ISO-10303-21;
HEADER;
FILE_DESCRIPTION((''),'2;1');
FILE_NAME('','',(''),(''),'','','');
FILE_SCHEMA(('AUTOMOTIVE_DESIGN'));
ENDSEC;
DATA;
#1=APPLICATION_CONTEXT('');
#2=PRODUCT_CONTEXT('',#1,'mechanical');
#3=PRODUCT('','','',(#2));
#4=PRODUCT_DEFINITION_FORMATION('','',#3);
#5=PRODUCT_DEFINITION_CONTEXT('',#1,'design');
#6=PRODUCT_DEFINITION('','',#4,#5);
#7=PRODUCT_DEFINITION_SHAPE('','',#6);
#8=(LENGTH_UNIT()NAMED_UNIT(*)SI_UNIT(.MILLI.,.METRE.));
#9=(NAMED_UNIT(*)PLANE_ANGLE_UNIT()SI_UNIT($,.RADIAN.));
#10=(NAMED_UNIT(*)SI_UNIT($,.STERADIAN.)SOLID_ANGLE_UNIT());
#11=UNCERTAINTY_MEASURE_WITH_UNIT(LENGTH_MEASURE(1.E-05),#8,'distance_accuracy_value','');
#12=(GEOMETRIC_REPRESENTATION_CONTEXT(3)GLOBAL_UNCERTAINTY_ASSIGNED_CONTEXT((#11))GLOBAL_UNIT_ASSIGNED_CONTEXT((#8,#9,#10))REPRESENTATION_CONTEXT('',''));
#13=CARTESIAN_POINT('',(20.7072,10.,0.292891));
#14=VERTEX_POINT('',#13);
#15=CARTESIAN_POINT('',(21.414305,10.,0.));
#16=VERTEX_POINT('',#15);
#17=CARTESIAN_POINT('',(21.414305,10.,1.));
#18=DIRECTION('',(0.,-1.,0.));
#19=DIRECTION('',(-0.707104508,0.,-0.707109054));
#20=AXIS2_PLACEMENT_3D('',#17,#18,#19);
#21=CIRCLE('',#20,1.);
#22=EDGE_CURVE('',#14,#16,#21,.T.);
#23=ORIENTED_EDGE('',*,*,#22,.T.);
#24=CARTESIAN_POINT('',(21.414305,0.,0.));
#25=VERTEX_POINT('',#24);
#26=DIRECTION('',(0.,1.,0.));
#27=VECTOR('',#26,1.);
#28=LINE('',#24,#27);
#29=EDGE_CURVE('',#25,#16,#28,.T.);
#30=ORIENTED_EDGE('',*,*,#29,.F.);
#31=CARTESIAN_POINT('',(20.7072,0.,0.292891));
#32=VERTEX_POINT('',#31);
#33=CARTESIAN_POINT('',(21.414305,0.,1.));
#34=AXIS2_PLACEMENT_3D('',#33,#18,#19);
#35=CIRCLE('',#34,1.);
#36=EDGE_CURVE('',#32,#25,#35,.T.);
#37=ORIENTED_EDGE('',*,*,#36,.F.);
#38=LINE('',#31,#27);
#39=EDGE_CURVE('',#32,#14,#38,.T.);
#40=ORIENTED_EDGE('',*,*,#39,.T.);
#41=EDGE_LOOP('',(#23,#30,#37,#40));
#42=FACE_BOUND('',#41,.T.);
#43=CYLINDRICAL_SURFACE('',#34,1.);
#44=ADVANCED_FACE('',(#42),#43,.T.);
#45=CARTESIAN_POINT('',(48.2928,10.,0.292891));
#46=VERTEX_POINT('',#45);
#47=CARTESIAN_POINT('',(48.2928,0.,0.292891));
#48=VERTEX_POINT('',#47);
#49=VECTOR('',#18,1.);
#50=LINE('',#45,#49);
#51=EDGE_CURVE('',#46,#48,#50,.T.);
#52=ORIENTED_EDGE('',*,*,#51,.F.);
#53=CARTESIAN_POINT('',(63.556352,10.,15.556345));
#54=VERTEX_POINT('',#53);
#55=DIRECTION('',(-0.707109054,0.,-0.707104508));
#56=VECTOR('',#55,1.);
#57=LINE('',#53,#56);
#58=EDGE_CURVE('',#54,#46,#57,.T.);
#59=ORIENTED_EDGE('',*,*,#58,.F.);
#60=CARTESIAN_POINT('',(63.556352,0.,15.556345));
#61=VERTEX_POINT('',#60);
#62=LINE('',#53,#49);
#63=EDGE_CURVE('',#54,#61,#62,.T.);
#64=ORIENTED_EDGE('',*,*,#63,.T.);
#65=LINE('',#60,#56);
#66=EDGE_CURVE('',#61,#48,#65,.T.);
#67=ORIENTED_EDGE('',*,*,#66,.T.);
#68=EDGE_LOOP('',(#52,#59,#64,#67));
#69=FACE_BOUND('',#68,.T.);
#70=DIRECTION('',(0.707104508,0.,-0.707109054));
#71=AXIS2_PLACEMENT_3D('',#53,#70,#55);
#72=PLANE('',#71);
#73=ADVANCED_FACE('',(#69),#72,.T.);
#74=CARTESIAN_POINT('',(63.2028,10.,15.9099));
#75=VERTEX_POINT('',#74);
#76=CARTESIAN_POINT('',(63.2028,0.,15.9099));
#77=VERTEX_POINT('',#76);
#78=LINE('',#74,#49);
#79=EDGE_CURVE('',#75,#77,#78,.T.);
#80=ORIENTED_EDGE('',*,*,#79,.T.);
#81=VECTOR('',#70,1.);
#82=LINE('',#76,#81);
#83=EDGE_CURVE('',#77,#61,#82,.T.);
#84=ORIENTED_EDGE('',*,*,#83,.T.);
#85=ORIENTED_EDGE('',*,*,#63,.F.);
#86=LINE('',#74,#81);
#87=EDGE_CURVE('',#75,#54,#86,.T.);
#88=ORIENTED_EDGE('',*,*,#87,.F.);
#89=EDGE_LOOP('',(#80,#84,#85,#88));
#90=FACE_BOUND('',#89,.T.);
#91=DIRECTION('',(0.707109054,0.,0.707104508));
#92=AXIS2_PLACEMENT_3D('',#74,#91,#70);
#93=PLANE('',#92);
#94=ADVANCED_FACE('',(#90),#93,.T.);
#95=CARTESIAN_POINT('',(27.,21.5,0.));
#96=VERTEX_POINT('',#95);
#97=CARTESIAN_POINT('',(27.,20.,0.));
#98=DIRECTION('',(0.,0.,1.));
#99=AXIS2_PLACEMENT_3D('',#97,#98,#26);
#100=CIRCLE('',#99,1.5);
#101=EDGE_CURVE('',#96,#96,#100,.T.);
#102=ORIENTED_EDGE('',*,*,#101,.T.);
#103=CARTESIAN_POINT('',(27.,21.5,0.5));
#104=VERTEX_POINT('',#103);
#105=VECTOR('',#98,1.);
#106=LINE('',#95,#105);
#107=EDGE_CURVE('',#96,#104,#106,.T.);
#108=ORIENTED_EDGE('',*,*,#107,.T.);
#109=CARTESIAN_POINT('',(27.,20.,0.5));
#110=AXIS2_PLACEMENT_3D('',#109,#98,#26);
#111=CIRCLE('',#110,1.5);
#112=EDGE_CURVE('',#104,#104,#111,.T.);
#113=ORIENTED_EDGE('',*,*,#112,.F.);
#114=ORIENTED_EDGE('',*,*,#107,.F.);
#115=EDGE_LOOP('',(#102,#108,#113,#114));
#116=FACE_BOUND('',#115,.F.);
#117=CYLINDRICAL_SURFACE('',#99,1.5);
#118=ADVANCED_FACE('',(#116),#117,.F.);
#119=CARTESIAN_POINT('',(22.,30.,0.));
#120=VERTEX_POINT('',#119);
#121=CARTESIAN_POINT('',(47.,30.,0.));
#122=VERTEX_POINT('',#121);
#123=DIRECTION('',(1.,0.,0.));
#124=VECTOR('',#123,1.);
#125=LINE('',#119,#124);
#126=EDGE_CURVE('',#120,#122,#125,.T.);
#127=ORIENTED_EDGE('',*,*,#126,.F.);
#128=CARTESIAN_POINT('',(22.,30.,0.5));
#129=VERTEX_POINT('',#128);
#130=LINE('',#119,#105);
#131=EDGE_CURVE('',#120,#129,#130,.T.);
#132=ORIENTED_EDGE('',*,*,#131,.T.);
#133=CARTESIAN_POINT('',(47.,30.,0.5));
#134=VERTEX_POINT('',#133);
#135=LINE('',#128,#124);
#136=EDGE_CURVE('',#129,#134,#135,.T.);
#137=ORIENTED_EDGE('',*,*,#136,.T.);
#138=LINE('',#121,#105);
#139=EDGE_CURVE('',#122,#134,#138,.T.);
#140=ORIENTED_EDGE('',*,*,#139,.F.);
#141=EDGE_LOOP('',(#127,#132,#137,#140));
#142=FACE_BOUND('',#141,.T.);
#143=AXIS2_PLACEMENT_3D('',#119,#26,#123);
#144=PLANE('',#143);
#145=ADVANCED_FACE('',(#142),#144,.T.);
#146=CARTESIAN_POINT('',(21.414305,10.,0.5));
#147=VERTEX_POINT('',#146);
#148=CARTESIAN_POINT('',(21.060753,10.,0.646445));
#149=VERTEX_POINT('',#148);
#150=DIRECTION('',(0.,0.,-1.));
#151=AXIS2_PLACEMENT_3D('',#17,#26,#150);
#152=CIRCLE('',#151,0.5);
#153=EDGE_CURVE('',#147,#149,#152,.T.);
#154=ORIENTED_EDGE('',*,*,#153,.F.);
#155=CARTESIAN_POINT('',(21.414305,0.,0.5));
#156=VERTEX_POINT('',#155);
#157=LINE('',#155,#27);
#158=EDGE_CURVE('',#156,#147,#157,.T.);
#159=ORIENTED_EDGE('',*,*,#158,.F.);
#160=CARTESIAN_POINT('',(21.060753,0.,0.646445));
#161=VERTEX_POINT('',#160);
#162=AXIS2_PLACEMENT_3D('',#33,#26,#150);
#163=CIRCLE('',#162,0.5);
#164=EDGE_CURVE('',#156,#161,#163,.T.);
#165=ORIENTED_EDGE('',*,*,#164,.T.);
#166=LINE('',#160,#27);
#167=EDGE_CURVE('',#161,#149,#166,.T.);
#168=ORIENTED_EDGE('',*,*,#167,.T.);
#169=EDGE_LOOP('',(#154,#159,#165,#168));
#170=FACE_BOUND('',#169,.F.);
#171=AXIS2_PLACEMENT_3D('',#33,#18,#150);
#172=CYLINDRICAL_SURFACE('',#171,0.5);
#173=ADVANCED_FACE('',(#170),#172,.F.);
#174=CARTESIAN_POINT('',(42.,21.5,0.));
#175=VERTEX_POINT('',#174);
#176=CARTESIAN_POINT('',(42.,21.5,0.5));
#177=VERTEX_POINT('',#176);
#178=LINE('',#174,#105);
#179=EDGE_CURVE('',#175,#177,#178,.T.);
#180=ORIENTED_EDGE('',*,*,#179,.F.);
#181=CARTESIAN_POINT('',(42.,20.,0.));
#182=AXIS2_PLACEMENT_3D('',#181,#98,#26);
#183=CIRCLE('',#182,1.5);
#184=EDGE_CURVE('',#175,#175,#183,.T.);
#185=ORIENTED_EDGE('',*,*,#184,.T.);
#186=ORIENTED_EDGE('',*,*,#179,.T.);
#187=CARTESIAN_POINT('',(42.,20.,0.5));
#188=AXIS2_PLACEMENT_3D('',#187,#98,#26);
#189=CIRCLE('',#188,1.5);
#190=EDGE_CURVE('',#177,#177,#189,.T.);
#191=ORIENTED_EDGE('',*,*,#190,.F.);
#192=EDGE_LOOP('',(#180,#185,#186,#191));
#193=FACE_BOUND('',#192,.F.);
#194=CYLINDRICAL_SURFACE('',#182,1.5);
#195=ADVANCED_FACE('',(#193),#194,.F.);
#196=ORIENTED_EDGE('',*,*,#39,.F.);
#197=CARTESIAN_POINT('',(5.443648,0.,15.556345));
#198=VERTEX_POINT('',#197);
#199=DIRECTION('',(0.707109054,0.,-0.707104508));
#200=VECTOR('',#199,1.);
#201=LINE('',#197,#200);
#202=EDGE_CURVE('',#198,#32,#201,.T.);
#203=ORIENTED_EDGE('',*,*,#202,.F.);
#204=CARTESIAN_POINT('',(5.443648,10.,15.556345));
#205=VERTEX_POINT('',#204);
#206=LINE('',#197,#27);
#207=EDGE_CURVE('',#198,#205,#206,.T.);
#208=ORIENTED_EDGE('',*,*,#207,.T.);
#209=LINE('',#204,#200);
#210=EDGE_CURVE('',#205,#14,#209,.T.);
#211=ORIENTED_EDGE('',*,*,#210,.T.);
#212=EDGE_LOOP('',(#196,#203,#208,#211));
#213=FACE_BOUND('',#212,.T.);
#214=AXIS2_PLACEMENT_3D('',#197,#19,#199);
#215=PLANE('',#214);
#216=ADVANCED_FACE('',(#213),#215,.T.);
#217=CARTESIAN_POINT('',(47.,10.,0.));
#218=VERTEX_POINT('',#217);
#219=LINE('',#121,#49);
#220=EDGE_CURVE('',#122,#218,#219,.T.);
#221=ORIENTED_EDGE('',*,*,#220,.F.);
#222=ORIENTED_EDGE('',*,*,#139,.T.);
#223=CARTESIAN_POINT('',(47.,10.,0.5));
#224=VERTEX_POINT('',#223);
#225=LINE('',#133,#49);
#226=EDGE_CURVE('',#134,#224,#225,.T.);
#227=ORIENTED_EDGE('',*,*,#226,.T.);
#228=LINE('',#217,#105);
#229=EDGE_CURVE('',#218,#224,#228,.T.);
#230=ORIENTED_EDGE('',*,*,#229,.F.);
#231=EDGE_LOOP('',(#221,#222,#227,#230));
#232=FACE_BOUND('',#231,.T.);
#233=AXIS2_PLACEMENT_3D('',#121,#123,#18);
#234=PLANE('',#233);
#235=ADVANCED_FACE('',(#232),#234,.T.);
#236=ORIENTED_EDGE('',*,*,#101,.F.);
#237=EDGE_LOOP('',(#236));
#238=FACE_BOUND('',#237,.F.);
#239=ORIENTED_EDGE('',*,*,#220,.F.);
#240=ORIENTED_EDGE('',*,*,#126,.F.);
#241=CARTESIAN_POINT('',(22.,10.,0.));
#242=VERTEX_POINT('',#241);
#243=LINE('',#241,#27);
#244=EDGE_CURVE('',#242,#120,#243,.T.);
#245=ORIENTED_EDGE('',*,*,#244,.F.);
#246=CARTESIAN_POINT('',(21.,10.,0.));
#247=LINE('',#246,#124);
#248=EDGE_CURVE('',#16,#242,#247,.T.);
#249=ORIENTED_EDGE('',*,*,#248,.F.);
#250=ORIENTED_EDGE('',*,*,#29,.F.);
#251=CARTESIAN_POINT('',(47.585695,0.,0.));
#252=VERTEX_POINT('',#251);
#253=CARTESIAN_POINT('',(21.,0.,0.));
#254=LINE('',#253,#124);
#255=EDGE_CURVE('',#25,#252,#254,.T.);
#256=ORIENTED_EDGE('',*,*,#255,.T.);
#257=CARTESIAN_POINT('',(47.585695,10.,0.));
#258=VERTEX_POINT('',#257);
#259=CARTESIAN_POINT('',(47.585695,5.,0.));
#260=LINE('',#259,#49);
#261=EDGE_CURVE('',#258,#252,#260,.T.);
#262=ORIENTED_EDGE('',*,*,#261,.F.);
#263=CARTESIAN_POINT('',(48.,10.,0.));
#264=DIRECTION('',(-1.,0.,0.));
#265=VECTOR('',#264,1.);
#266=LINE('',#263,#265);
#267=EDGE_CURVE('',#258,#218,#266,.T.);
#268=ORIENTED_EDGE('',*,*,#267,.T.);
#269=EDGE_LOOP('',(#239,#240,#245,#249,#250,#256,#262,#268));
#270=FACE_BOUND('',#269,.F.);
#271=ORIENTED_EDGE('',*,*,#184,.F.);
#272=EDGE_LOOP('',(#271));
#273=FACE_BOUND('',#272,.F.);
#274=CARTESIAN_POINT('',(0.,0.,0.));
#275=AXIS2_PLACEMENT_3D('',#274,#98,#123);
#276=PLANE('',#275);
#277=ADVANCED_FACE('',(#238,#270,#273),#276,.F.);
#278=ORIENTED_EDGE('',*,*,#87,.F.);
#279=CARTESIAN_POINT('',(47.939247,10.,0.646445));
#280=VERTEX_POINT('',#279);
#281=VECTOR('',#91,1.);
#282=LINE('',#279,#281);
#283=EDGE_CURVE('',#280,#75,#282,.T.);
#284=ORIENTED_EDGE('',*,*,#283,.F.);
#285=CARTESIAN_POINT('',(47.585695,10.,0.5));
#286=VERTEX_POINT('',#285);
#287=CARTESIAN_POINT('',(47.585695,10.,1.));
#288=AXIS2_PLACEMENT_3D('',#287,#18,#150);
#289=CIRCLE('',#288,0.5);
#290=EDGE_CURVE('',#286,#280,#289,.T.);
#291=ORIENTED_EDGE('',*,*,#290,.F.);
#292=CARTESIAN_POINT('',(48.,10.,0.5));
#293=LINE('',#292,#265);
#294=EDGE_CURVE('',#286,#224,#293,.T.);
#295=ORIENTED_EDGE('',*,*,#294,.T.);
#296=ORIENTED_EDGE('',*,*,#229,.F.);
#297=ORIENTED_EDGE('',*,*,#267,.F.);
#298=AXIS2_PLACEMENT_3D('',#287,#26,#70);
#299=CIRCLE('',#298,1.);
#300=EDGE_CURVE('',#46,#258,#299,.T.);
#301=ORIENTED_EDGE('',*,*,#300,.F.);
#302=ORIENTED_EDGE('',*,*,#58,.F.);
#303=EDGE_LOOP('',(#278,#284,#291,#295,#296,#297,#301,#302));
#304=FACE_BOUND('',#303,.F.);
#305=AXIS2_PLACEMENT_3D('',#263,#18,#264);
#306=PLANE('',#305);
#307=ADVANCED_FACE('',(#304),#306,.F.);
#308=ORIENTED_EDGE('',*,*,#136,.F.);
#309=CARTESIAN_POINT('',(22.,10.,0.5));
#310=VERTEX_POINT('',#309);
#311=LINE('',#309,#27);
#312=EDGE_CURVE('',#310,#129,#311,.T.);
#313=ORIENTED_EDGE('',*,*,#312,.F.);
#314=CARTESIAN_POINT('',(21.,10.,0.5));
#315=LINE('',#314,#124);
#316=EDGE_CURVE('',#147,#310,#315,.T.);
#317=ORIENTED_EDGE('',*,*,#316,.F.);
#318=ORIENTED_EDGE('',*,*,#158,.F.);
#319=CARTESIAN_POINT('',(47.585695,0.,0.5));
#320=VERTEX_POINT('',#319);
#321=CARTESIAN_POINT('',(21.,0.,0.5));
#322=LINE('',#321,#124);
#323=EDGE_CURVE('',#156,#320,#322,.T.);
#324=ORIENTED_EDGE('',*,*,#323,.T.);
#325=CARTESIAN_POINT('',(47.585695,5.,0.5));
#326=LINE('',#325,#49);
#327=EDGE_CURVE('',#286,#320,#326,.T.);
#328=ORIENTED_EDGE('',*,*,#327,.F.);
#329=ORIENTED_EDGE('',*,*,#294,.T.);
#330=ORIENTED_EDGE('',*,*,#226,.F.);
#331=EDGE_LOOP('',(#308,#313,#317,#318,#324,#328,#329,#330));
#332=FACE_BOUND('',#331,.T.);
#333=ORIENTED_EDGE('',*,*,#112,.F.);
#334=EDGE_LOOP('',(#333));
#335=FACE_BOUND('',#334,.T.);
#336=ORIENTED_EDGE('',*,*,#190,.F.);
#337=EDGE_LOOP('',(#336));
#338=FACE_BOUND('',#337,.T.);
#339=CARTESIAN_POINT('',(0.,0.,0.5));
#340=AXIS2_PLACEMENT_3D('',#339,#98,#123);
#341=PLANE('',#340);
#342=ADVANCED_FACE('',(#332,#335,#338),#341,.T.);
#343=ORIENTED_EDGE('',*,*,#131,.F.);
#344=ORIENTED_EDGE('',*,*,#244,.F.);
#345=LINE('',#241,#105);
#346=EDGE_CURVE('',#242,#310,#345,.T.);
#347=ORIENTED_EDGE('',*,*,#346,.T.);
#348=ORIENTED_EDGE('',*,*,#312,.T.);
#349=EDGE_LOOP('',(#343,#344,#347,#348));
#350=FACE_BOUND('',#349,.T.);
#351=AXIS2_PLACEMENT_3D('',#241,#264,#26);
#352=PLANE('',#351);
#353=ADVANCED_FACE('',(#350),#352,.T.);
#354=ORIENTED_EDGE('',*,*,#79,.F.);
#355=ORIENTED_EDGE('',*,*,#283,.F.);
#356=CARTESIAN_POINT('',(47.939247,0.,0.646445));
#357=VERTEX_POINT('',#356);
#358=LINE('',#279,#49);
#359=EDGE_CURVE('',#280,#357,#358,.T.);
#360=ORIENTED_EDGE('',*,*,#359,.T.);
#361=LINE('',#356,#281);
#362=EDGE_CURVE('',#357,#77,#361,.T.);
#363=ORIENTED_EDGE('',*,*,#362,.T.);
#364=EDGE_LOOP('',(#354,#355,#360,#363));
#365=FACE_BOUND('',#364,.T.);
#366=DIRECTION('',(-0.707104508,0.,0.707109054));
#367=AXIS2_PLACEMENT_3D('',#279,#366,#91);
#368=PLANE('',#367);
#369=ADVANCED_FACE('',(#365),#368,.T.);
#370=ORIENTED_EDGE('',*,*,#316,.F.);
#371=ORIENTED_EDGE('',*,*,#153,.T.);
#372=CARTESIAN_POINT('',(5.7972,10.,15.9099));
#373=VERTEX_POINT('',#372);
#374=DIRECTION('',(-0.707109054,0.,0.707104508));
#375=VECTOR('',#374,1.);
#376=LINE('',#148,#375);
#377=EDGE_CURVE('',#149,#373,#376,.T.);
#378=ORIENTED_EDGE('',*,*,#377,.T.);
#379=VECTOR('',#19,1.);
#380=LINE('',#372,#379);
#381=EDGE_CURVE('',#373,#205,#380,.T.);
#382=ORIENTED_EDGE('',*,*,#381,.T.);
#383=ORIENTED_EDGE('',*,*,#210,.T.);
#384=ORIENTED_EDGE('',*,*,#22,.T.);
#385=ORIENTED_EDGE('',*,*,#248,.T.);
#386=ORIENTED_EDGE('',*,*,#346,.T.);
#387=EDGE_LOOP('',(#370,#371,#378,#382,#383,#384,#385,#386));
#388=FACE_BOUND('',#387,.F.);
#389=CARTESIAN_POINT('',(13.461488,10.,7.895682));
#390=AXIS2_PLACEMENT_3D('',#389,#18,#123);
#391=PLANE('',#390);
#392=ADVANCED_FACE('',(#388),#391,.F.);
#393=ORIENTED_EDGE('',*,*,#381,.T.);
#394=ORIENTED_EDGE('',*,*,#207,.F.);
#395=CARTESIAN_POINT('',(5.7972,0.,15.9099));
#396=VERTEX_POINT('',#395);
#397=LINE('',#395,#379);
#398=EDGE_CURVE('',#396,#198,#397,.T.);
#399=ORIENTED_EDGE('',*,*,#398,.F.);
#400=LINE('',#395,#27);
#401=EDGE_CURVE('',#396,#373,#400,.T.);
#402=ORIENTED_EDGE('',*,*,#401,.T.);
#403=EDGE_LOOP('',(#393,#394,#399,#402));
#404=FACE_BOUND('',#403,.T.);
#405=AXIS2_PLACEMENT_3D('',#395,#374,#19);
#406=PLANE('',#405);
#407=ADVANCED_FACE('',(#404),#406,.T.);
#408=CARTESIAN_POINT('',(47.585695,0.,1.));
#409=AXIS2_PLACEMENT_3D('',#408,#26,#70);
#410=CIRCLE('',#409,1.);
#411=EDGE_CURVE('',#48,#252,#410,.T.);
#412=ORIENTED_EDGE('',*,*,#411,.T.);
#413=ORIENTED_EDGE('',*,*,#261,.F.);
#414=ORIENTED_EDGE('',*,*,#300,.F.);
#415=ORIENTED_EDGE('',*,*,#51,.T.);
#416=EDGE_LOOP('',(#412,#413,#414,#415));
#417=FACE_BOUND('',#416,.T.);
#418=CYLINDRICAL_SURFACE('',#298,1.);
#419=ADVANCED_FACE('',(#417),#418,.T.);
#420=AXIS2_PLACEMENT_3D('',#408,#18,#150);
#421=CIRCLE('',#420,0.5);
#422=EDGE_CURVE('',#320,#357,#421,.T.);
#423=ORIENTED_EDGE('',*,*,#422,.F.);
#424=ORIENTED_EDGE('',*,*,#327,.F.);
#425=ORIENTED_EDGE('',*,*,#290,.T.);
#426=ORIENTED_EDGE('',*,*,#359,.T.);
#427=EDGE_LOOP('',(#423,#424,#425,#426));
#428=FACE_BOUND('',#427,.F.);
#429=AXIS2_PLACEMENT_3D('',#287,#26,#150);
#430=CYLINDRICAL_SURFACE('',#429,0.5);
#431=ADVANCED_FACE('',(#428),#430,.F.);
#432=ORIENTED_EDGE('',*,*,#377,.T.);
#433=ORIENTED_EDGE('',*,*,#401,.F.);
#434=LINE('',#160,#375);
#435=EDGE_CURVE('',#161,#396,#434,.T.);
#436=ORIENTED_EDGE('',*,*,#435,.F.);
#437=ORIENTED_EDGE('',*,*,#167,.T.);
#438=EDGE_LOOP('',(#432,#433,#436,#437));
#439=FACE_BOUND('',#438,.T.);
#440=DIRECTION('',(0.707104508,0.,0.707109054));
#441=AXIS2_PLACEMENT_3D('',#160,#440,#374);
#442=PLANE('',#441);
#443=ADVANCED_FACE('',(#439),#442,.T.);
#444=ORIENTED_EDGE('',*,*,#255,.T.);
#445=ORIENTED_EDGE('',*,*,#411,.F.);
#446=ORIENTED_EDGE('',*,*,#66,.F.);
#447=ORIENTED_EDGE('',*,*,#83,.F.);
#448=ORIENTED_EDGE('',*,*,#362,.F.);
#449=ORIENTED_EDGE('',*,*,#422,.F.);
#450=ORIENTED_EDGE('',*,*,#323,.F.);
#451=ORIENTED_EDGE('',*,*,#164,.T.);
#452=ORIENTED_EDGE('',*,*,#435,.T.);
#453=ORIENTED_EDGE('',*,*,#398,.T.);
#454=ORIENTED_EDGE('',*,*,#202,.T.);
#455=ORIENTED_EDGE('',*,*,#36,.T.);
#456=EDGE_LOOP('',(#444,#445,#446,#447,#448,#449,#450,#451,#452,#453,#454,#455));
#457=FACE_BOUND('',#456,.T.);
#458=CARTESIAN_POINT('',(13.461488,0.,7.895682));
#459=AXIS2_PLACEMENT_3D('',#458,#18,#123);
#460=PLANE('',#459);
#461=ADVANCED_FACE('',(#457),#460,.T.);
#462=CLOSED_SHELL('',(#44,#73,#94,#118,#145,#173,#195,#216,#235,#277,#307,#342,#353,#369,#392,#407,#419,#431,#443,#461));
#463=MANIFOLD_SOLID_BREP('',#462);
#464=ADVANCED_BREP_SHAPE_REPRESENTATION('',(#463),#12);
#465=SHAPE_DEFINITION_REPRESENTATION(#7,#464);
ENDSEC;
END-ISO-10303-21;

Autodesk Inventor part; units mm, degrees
ref_plane "YZ Plane" through (0, 0, 0) normal (1, 0, 0) x (0, 1, 0)
ref_plane "XZ Plane" through (0, 0, 0) normal (0, 1, 0) x (-1, 0, 0)
ref_plane "XY Plane" through (0, 0, 0) normal (0, 0, 1) x (1, 0, 0)
sketch "Sketch1" plane through (0, 0, 0) normal (0, 0, 1) x (1, 0, 0)
  line L0 (0, 0) -> (0, 10)
  line L1 (0, 10) -> (21, 10)
  line L2 (22, 10) -> (22, 30)
  line L3 (22, 30) -> (47, 30)
  line L4 (47, 30) -> (47, 10)
  line L5 (48, 10) -> (69, 10)
  line L6 (69, 10) -> (69, 0)
  line L7 (21, 10) -> (21, 0)
  line L8 (48, 10) -> (48, 0)
  line L9 (69, 0) -> (48, 0)
  line L10 (21, 0) -> (0, 0)
  line L11 (21, 0) -> (48, 0)
  line L12 (48, 10) -> (47, 10)
  line L13 (21, 10) -> (22, 10)
  dimension "d0" = 22
  dimension "d1" = 22
  dimension "d2" = 10
  dimension "d3" = 25
  dimension "d5" = 10
  dimension "d8" = 1
  dimension "d9" = 1
extrude "Plate1" add sketch "Sketch1" along normal blind 0.5 contours L7 L13 L2 L3 L4 L12 L8 L11
sketch "Sketch2" plane through (21.3536, 0, 0.3536) normal (-0.7071068, 0, -0.7071068) x (0, -1, 0)
  line L0 (-10, 0) -> (0, 0)
  line L1 (0, 0) -> (0, 22)
  line L2 (0, 22) -> (-10, 22)
  line L3 (-10, 22) -> (-10, 0)
edge flange "Flange1" height 22 angle 45 thickness 0.5 bend radius 0.5 thickness toward (-0.7071068, 0, -0.7071068) relief straight relief width 0.5 relief depth 0.25 corner gap 0.5 corner form 0 edges at (21, 5, 0.5) (48, 5, 0.5) wall of the first edge with corners at (21.3536, 10, 0.3536) (21.3536, 0, 0.3536) (5.7972, 0, 15.9099) (5.7972, 10, 15.9099)
bend "Bend1"
corner "Corner1"
sketch "Sketch3" plane through (0, 0, 0) normal (0, 0, -1) x (-1, 0, 0)
  line L0 (-21.4142, 0) -> (-47.5858, 0) projected
  line L1 (-47, 10) -> (-47, 30) projected
  circle A0 centre (-42, 20) radius 1.5
  circle A1 centre (-27, 20) radius 1.5
  point P0 (0, 0)
  dimension "d21" = 3
  dimension "d22" = 3
  dimension "d23" = 15
  dimension "d24" = 20
  dimension "d25" = 5
hole "Hole1" at (42, 20, 0) at (27, 20, 0) direction (0, 0, 1) diameter 3 depth 0.5 tip angle 118
equation "\"d31\" = Thickness"
equation "\"d11\" = BendReliefWidth"
equation "\"d12\" = BendReliefDepth"
equation "\"d13\" = MinimumRemnant"
equation "\"d14\" = BendRadius"
equation "\"d17\" = BendRadius"
equation "\"d18\" = CornerReliefSize"
equation "\"d19\" = GapSize"
equation "\"d20\" = JacobiRadiusSize"
equation "\"BendRadius\" = Thickness"
equation "\"BendReliefWidth\" = Thickness"
equation "\"BendReliefDepth\" = 0.5 * Thickness"
equation "\"CornerReliefSize\" = 4 * Thickness"
equation "\"MinimumRemnant\" = 2 * Thickness"
equation "\"TransitionRadius\" = BendRadius"
equation "\"JacobiRadiusSize\" = Thickness"
equation "\"GapSize\" = Thickness"
equation "\"d10\" = BendRadius"
equation "\"Thickness\" = 0.5"
properties part number "PÁRA LAMA TRASEIRO"
